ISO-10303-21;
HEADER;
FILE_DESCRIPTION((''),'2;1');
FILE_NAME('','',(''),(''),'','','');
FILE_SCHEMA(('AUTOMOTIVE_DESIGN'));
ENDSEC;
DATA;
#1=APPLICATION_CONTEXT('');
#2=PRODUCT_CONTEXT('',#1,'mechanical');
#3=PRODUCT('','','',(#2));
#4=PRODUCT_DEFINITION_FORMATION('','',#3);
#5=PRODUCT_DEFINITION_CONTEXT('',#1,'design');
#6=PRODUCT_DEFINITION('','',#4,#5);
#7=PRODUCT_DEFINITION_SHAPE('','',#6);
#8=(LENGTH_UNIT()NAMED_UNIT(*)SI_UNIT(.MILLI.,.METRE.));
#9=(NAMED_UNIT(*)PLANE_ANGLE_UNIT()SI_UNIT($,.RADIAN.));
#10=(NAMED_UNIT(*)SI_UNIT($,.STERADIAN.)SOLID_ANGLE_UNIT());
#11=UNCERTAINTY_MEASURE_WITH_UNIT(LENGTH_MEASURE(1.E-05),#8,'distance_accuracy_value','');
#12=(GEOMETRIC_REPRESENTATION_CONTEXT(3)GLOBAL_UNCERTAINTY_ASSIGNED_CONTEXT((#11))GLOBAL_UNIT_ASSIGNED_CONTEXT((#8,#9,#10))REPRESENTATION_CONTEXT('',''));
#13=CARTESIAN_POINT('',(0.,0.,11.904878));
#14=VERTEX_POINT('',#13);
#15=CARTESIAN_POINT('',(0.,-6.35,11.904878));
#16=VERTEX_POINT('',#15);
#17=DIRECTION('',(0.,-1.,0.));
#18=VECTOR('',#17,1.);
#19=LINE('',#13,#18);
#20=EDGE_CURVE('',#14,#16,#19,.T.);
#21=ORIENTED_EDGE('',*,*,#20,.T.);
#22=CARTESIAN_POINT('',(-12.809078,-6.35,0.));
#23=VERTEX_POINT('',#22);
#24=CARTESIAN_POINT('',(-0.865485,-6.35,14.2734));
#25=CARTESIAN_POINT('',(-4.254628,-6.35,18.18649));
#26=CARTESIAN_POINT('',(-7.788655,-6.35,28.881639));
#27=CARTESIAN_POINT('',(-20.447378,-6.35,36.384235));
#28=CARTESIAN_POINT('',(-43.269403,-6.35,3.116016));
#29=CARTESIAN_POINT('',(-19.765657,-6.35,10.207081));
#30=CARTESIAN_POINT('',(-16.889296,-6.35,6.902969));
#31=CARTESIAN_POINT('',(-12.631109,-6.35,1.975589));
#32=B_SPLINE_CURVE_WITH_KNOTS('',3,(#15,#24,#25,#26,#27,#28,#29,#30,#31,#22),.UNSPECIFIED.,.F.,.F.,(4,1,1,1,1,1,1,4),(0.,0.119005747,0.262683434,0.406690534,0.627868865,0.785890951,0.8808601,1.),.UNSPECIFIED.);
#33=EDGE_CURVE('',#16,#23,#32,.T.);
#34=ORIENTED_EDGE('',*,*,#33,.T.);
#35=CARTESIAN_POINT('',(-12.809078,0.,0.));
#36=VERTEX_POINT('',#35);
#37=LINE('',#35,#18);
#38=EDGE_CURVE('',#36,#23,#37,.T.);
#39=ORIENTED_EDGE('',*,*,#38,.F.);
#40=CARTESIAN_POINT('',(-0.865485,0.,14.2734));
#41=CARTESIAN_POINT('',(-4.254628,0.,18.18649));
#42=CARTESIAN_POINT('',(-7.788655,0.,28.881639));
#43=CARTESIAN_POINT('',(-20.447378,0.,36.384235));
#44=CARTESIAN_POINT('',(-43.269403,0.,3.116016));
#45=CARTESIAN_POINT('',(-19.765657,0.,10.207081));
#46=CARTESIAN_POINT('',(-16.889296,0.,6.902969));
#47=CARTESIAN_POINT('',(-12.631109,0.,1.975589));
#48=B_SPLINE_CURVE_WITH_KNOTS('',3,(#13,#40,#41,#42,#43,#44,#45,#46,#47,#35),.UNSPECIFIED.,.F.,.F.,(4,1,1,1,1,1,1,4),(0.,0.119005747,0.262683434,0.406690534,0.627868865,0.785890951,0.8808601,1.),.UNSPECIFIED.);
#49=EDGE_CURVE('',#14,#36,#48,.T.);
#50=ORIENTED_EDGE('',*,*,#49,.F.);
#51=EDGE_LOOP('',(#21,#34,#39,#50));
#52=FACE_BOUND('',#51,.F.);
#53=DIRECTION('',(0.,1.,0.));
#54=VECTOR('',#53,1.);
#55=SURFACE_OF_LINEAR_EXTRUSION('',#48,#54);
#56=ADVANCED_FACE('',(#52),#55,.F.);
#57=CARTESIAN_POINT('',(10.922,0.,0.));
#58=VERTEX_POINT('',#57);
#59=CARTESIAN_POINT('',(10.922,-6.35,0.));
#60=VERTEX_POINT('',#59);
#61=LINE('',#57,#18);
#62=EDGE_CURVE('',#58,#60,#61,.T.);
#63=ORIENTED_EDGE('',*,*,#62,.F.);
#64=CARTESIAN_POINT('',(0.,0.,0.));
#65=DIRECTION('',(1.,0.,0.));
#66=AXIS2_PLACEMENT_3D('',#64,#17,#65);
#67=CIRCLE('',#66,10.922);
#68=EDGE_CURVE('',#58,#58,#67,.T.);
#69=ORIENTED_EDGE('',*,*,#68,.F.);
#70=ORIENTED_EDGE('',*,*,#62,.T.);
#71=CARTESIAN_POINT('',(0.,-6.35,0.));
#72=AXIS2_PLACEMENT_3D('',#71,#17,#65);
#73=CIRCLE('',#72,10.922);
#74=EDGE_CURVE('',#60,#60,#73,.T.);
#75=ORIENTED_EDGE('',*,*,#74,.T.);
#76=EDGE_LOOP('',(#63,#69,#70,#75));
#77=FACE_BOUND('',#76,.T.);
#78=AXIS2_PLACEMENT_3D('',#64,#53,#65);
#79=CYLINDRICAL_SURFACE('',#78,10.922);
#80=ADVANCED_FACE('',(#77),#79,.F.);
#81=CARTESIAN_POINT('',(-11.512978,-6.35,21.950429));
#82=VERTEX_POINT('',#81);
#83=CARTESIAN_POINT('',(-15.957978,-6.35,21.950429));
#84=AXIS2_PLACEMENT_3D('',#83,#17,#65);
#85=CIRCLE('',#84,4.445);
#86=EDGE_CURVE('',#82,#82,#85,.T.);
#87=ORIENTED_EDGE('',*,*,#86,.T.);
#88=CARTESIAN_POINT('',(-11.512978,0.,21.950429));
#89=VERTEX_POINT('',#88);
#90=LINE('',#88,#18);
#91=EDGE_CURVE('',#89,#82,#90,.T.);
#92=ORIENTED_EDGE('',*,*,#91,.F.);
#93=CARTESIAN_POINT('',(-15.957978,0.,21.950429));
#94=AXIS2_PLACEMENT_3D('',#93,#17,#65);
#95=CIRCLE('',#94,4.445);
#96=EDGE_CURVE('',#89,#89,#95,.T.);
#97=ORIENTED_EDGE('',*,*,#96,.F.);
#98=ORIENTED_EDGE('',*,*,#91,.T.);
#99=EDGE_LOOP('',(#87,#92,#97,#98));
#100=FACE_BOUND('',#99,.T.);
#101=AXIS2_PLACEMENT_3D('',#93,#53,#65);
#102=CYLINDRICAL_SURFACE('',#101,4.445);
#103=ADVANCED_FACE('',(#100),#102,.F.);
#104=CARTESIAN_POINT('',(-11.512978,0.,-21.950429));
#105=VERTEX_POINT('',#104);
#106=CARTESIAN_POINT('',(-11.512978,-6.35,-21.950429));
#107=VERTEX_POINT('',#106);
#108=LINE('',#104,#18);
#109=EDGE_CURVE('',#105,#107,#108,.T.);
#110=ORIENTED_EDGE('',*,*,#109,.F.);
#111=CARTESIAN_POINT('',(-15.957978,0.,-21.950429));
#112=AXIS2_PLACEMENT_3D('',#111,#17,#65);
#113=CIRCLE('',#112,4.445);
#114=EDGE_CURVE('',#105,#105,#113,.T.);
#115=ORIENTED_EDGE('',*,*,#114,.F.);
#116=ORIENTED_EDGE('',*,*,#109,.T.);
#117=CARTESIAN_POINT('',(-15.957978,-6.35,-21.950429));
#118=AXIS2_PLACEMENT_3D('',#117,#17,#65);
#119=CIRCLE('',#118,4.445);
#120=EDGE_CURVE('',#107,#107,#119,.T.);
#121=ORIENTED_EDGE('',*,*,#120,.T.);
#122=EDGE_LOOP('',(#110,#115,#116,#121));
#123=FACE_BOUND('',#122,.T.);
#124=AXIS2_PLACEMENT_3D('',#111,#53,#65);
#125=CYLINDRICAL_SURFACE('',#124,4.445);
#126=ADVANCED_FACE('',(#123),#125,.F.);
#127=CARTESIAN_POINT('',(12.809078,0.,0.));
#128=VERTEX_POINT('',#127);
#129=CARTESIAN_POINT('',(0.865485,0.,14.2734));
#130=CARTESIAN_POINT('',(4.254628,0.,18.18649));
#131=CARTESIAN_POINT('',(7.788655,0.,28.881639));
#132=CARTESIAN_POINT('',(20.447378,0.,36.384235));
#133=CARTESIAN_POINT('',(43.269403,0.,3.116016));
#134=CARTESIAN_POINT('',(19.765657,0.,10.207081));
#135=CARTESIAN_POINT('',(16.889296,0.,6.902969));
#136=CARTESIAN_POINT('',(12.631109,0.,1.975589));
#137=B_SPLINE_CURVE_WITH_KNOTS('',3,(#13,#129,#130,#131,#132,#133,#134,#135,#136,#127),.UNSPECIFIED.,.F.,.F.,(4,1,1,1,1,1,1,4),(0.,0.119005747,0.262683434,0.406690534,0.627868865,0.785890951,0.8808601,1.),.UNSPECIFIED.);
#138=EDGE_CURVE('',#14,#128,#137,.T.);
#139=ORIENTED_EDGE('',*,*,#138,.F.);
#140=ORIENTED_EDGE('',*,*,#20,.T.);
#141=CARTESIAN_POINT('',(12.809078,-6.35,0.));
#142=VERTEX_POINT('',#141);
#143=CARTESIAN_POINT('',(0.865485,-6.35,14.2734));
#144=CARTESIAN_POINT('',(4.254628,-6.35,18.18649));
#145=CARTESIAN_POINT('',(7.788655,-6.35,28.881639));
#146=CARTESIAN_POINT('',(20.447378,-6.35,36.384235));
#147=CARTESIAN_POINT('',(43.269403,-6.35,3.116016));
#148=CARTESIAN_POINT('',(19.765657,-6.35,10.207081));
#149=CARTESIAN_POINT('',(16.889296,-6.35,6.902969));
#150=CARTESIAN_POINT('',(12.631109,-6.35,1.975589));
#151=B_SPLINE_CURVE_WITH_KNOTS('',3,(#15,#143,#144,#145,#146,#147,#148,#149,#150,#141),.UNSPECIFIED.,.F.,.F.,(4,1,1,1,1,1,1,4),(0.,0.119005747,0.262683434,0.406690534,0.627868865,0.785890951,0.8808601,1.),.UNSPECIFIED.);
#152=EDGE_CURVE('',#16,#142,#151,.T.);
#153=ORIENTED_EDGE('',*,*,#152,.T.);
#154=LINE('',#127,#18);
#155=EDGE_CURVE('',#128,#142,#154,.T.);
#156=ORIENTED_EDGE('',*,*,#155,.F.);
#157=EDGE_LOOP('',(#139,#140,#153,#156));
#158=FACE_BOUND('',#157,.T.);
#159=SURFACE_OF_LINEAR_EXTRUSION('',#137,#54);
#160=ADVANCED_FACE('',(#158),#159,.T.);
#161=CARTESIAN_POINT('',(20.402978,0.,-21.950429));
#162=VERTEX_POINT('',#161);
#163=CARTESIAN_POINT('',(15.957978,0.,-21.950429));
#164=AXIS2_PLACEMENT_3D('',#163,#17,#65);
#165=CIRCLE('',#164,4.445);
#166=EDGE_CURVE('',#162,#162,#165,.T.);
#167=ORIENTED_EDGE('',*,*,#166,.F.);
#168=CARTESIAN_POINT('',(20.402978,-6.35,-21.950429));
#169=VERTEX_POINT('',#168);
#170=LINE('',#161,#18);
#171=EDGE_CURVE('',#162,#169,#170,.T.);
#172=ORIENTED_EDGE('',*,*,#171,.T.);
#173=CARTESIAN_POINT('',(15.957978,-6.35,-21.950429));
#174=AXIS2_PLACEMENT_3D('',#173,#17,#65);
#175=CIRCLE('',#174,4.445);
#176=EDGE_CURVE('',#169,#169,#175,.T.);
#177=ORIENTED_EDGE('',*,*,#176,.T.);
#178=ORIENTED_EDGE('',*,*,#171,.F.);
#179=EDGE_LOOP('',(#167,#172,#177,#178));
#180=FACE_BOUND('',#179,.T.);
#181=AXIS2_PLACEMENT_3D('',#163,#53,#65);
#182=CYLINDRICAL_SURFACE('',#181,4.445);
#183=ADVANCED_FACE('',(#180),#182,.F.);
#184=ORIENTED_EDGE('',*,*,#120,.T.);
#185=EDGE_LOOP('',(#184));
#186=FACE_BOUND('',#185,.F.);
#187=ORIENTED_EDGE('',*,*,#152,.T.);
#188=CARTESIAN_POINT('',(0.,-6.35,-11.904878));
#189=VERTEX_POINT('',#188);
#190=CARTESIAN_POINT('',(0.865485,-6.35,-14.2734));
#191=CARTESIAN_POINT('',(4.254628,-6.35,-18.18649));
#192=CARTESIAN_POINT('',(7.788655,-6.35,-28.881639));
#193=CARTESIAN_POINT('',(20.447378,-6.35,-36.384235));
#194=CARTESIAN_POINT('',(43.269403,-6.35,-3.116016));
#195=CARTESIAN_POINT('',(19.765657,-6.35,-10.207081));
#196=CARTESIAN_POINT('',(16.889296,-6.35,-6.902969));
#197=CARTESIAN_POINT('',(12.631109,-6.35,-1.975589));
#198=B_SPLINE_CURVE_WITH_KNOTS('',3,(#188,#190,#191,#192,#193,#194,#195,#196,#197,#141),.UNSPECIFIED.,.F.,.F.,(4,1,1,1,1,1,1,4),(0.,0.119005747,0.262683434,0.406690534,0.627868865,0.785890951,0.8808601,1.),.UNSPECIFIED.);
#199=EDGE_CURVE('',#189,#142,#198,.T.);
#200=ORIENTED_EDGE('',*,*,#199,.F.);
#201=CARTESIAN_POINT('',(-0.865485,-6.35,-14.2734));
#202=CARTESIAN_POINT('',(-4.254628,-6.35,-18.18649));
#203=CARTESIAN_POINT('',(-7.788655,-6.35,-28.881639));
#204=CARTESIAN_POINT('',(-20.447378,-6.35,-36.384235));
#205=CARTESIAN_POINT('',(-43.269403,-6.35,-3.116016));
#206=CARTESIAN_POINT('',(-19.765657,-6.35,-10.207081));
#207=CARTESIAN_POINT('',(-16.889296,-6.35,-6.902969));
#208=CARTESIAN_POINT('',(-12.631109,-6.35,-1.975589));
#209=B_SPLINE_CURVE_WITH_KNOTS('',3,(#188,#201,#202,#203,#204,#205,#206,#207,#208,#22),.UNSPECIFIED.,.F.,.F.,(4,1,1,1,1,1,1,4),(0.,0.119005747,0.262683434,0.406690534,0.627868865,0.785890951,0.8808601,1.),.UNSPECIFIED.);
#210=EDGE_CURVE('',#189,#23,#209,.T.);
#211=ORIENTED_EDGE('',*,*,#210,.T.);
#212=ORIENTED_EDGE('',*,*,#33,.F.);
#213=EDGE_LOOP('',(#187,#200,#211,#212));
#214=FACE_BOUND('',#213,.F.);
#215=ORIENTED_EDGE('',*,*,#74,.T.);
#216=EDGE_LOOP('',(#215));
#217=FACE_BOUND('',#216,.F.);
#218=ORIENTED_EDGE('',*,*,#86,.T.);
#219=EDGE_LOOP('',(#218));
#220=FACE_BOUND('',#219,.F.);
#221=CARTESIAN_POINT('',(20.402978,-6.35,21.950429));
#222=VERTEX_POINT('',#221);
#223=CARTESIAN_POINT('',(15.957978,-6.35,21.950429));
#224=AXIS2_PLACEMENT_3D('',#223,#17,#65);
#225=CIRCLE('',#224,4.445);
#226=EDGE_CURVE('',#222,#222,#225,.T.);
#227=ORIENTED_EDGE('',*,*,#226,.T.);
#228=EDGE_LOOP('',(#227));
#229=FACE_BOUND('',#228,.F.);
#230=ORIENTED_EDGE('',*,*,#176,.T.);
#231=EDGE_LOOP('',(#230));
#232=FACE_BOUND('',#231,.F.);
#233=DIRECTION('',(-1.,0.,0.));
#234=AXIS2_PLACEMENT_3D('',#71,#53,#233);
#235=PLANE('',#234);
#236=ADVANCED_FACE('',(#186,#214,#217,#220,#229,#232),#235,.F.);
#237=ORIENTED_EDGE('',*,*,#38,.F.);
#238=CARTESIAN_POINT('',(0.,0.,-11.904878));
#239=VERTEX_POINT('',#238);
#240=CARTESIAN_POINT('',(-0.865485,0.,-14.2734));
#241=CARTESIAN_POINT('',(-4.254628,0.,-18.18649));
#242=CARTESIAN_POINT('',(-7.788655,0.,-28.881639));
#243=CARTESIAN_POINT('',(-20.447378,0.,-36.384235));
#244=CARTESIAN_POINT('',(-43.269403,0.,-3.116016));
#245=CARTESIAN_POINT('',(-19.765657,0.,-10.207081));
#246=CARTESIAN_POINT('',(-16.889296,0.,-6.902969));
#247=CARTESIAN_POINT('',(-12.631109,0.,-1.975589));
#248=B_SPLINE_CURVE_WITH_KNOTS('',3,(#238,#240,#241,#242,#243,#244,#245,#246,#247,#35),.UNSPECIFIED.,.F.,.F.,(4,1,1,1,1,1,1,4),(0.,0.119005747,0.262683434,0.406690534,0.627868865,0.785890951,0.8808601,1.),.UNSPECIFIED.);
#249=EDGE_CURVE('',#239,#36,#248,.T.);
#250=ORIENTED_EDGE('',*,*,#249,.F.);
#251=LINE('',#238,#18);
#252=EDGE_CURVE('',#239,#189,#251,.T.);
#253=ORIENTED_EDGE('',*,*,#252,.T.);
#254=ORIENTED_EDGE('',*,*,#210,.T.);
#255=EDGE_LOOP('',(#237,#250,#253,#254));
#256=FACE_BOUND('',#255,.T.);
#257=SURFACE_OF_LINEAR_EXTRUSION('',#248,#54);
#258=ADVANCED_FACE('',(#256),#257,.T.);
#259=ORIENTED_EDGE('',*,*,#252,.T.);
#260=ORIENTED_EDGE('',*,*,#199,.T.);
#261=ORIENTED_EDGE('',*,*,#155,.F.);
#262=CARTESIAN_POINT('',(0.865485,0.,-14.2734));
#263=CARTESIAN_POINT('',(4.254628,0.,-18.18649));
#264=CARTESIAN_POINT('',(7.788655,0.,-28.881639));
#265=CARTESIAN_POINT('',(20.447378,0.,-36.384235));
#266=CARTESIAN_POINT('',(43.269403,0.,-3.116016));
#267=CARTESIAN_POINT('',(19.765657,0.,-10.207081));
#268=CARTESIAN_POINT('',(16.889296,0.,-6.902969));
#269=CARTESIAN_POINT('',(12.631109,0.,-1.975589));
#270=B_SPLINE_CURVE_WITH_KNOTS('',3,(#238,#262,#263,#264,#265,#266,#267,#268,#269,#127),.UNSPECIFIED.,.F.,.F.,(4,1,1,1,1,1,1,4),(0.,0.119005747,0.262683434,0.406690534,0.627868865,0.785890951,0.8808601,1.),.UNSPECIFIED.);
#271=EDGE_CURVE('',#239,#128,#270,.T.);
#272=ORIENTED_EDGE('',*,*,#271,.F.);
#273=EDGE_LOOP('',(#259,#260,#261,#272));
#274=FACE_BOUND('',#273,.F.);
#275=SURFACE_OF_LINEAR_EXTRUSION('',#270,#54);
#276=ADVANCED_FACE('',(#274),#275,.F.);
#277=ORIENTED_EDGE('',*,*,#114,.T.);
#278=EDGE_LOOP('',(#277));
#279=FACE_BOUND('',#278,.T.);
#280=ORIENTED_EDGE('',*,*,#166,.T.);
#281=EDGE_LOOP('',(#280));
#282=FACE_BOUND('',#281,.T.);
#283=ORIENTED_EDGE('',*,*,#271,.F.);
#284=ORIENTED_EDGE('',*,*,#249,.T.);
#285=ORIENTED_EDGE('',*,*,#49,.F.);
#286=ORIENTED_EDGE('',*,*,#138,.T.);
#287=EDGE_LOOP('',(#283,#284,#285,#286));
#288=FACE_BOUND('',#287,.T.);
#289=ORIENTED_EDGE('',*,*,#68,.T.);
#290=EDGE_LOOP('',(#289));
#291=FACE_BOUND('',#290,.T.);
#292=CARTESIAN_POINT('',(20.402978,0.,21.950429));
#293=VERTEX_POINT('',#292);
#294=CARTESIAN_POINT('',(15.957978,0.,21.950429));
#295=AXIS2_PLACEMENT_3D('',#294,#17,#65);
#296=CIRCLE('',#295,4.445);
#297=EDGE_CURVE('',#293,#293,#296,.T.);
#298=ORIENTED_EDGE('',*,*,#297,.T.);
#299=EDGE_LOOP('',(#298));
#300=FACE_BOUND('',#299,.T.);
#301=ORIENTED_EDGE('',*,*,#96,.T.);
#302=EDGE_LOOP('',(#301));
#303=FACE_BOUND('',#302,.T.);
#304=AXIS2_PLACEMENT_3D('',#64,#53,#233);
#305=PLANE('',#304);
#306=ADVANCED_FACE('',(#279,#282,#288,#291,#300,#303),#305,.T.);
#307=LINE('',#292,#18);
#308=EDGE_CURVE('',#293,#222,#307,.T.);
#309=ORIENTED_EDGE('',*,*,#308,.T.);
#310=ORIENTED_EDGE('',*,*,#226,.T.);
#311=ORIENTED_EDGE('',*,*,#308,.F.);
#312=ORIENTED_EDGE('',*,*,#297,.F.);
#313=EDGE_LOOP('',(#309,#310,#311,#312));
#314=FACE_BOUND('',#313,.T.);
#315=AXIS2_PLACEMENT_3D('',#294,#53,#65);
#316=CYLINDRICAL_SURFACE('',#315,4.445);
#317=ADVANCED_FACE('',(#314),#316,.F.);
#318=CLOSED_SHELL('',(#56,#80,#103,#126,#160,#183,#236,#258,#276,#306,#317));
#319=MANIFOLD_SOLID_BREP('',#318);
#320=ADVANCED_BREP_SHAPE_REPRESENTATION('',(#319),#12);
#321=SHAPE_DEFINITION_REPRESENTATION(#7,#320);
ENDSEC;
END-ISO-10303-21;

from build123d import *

# Parameters (mm, degrees)
F0_R     = 4.445
F0_R_2   = 10.922
F1_DEPTH = 6.35


# Not quite as in the source:
# - a feature of the source that left no trace in its solid (it failed there, or was rolled back) is left out


with BuildPart() as f1:
    # F0 (on Front) → F1 (new body)
    with BuildSketch(Plane.XZ):
        with BuildLine():
            add(Edge.make_bspline(
                [(0, 11.9048783648), (0.8654849169, 14.273399942), (4.2546283469, 18.1864903302), (7.7886554867, 28.8816390749), (20.4473781602, 36.3842350457), (43.2694030288, 3.1160158933), (19.7656572958, 10.2070808743), (16.889296228, 6.9029692545), (12.6311089417, 1.9755885943), (12.8090780113, 0)],
                knots=[0, 0, 0, 0, 0.1190057466, 0.2626834342, 0.4066905335, 0.6278688654, 0.7858909514, 0.8808601002, 1, 1, 1, 1], degree=3))
            add(Edge.make_bspline(
                [(0, 11.9048783648), (-0.8654849169, 14.273399942), (-4.2546283469, 18.1864903302), (-7.7886554867, 28.8816390749), (-20.4473781602, 36.3842350457), (-43.2694030288, 3.1160158933), (-19.7656572958, 10.2070808743), (-16.889296228, 6.9029692545), (-12.6311089417, 1.9755885943), (-12.8090780113, 0)],
                knots=[0, 0, 0, 0, 0.1190057466, 0.2626834342, 0.4066905335, 0.6278688654, 0.7858909514, 0.8808601002, 1, 1, 1, 1], degree=3))
            add(Edge.make_bspline(
                [(0, -11.9048783648), (-0.8654849169, -14.273399942), (-4.2546283469, -18.1864903302), (-7.7886554867, -28.8816390749), (-20.4473781602, -36.3842350457), (-43.2694030288, -3.1160158933), (-19.7656572958, -10.2070808743), (-16.889296228, -6.9029692545), (-12.6311089417, -1.9755885943), (-12.8090780113, 0)],
                knots=[0, 0, 0, 0, 0.1190057466, 0.2626834342, 0.4066905335, 0.6278688654, 0.7858909514, 0.8808601002, 1, 1, 1, 1], degree=3))
            add(Edge.make_bspline(
                [(0, -11.9048783648), (0.8654849169, -14.273399942), (4.2546283469, -18.1864903302), (7.7886554867, -28.8816390749), (20.4473781602, -36.3842350457), (43.2694030288, -3.1160158933), (19.7656572958, -10.2070808743), (16.889296228, -6.9029692545), (12.6311089417, -1.9755885943), (12.8090780113, 0)],
                knots=[0, 0, 0, 0, 0.1190057466, 0.2626834342, 0.4066905335, 0.6278688654, 0.7858909514, 0.8808601002, 1, 1, 1, 1], degree=3))
        make_face()
        with Locations((-15.9579783894, -21.950429026)):
            Circle(F0_R, mode=Mode.SUBTRACT)
        with Locations((15.9579783894, -21.950429026)):
            Circle(F0_R, mode=Mode.SUBTRACT)
        with Locations((-15.9579783894, 21.950429026)):
            Circle(F0_R, mode=Mode.SUBTRACT)
        Circle(F0_R_2, mode=Mode.SUBTRACT)
        with Locations((15.9579783894, 21.950429026)):
            Circle(F0_R, mode=Mode.SUBTRACT)
    extrude(amount=F1_DEPTH)


solid = f1.part
